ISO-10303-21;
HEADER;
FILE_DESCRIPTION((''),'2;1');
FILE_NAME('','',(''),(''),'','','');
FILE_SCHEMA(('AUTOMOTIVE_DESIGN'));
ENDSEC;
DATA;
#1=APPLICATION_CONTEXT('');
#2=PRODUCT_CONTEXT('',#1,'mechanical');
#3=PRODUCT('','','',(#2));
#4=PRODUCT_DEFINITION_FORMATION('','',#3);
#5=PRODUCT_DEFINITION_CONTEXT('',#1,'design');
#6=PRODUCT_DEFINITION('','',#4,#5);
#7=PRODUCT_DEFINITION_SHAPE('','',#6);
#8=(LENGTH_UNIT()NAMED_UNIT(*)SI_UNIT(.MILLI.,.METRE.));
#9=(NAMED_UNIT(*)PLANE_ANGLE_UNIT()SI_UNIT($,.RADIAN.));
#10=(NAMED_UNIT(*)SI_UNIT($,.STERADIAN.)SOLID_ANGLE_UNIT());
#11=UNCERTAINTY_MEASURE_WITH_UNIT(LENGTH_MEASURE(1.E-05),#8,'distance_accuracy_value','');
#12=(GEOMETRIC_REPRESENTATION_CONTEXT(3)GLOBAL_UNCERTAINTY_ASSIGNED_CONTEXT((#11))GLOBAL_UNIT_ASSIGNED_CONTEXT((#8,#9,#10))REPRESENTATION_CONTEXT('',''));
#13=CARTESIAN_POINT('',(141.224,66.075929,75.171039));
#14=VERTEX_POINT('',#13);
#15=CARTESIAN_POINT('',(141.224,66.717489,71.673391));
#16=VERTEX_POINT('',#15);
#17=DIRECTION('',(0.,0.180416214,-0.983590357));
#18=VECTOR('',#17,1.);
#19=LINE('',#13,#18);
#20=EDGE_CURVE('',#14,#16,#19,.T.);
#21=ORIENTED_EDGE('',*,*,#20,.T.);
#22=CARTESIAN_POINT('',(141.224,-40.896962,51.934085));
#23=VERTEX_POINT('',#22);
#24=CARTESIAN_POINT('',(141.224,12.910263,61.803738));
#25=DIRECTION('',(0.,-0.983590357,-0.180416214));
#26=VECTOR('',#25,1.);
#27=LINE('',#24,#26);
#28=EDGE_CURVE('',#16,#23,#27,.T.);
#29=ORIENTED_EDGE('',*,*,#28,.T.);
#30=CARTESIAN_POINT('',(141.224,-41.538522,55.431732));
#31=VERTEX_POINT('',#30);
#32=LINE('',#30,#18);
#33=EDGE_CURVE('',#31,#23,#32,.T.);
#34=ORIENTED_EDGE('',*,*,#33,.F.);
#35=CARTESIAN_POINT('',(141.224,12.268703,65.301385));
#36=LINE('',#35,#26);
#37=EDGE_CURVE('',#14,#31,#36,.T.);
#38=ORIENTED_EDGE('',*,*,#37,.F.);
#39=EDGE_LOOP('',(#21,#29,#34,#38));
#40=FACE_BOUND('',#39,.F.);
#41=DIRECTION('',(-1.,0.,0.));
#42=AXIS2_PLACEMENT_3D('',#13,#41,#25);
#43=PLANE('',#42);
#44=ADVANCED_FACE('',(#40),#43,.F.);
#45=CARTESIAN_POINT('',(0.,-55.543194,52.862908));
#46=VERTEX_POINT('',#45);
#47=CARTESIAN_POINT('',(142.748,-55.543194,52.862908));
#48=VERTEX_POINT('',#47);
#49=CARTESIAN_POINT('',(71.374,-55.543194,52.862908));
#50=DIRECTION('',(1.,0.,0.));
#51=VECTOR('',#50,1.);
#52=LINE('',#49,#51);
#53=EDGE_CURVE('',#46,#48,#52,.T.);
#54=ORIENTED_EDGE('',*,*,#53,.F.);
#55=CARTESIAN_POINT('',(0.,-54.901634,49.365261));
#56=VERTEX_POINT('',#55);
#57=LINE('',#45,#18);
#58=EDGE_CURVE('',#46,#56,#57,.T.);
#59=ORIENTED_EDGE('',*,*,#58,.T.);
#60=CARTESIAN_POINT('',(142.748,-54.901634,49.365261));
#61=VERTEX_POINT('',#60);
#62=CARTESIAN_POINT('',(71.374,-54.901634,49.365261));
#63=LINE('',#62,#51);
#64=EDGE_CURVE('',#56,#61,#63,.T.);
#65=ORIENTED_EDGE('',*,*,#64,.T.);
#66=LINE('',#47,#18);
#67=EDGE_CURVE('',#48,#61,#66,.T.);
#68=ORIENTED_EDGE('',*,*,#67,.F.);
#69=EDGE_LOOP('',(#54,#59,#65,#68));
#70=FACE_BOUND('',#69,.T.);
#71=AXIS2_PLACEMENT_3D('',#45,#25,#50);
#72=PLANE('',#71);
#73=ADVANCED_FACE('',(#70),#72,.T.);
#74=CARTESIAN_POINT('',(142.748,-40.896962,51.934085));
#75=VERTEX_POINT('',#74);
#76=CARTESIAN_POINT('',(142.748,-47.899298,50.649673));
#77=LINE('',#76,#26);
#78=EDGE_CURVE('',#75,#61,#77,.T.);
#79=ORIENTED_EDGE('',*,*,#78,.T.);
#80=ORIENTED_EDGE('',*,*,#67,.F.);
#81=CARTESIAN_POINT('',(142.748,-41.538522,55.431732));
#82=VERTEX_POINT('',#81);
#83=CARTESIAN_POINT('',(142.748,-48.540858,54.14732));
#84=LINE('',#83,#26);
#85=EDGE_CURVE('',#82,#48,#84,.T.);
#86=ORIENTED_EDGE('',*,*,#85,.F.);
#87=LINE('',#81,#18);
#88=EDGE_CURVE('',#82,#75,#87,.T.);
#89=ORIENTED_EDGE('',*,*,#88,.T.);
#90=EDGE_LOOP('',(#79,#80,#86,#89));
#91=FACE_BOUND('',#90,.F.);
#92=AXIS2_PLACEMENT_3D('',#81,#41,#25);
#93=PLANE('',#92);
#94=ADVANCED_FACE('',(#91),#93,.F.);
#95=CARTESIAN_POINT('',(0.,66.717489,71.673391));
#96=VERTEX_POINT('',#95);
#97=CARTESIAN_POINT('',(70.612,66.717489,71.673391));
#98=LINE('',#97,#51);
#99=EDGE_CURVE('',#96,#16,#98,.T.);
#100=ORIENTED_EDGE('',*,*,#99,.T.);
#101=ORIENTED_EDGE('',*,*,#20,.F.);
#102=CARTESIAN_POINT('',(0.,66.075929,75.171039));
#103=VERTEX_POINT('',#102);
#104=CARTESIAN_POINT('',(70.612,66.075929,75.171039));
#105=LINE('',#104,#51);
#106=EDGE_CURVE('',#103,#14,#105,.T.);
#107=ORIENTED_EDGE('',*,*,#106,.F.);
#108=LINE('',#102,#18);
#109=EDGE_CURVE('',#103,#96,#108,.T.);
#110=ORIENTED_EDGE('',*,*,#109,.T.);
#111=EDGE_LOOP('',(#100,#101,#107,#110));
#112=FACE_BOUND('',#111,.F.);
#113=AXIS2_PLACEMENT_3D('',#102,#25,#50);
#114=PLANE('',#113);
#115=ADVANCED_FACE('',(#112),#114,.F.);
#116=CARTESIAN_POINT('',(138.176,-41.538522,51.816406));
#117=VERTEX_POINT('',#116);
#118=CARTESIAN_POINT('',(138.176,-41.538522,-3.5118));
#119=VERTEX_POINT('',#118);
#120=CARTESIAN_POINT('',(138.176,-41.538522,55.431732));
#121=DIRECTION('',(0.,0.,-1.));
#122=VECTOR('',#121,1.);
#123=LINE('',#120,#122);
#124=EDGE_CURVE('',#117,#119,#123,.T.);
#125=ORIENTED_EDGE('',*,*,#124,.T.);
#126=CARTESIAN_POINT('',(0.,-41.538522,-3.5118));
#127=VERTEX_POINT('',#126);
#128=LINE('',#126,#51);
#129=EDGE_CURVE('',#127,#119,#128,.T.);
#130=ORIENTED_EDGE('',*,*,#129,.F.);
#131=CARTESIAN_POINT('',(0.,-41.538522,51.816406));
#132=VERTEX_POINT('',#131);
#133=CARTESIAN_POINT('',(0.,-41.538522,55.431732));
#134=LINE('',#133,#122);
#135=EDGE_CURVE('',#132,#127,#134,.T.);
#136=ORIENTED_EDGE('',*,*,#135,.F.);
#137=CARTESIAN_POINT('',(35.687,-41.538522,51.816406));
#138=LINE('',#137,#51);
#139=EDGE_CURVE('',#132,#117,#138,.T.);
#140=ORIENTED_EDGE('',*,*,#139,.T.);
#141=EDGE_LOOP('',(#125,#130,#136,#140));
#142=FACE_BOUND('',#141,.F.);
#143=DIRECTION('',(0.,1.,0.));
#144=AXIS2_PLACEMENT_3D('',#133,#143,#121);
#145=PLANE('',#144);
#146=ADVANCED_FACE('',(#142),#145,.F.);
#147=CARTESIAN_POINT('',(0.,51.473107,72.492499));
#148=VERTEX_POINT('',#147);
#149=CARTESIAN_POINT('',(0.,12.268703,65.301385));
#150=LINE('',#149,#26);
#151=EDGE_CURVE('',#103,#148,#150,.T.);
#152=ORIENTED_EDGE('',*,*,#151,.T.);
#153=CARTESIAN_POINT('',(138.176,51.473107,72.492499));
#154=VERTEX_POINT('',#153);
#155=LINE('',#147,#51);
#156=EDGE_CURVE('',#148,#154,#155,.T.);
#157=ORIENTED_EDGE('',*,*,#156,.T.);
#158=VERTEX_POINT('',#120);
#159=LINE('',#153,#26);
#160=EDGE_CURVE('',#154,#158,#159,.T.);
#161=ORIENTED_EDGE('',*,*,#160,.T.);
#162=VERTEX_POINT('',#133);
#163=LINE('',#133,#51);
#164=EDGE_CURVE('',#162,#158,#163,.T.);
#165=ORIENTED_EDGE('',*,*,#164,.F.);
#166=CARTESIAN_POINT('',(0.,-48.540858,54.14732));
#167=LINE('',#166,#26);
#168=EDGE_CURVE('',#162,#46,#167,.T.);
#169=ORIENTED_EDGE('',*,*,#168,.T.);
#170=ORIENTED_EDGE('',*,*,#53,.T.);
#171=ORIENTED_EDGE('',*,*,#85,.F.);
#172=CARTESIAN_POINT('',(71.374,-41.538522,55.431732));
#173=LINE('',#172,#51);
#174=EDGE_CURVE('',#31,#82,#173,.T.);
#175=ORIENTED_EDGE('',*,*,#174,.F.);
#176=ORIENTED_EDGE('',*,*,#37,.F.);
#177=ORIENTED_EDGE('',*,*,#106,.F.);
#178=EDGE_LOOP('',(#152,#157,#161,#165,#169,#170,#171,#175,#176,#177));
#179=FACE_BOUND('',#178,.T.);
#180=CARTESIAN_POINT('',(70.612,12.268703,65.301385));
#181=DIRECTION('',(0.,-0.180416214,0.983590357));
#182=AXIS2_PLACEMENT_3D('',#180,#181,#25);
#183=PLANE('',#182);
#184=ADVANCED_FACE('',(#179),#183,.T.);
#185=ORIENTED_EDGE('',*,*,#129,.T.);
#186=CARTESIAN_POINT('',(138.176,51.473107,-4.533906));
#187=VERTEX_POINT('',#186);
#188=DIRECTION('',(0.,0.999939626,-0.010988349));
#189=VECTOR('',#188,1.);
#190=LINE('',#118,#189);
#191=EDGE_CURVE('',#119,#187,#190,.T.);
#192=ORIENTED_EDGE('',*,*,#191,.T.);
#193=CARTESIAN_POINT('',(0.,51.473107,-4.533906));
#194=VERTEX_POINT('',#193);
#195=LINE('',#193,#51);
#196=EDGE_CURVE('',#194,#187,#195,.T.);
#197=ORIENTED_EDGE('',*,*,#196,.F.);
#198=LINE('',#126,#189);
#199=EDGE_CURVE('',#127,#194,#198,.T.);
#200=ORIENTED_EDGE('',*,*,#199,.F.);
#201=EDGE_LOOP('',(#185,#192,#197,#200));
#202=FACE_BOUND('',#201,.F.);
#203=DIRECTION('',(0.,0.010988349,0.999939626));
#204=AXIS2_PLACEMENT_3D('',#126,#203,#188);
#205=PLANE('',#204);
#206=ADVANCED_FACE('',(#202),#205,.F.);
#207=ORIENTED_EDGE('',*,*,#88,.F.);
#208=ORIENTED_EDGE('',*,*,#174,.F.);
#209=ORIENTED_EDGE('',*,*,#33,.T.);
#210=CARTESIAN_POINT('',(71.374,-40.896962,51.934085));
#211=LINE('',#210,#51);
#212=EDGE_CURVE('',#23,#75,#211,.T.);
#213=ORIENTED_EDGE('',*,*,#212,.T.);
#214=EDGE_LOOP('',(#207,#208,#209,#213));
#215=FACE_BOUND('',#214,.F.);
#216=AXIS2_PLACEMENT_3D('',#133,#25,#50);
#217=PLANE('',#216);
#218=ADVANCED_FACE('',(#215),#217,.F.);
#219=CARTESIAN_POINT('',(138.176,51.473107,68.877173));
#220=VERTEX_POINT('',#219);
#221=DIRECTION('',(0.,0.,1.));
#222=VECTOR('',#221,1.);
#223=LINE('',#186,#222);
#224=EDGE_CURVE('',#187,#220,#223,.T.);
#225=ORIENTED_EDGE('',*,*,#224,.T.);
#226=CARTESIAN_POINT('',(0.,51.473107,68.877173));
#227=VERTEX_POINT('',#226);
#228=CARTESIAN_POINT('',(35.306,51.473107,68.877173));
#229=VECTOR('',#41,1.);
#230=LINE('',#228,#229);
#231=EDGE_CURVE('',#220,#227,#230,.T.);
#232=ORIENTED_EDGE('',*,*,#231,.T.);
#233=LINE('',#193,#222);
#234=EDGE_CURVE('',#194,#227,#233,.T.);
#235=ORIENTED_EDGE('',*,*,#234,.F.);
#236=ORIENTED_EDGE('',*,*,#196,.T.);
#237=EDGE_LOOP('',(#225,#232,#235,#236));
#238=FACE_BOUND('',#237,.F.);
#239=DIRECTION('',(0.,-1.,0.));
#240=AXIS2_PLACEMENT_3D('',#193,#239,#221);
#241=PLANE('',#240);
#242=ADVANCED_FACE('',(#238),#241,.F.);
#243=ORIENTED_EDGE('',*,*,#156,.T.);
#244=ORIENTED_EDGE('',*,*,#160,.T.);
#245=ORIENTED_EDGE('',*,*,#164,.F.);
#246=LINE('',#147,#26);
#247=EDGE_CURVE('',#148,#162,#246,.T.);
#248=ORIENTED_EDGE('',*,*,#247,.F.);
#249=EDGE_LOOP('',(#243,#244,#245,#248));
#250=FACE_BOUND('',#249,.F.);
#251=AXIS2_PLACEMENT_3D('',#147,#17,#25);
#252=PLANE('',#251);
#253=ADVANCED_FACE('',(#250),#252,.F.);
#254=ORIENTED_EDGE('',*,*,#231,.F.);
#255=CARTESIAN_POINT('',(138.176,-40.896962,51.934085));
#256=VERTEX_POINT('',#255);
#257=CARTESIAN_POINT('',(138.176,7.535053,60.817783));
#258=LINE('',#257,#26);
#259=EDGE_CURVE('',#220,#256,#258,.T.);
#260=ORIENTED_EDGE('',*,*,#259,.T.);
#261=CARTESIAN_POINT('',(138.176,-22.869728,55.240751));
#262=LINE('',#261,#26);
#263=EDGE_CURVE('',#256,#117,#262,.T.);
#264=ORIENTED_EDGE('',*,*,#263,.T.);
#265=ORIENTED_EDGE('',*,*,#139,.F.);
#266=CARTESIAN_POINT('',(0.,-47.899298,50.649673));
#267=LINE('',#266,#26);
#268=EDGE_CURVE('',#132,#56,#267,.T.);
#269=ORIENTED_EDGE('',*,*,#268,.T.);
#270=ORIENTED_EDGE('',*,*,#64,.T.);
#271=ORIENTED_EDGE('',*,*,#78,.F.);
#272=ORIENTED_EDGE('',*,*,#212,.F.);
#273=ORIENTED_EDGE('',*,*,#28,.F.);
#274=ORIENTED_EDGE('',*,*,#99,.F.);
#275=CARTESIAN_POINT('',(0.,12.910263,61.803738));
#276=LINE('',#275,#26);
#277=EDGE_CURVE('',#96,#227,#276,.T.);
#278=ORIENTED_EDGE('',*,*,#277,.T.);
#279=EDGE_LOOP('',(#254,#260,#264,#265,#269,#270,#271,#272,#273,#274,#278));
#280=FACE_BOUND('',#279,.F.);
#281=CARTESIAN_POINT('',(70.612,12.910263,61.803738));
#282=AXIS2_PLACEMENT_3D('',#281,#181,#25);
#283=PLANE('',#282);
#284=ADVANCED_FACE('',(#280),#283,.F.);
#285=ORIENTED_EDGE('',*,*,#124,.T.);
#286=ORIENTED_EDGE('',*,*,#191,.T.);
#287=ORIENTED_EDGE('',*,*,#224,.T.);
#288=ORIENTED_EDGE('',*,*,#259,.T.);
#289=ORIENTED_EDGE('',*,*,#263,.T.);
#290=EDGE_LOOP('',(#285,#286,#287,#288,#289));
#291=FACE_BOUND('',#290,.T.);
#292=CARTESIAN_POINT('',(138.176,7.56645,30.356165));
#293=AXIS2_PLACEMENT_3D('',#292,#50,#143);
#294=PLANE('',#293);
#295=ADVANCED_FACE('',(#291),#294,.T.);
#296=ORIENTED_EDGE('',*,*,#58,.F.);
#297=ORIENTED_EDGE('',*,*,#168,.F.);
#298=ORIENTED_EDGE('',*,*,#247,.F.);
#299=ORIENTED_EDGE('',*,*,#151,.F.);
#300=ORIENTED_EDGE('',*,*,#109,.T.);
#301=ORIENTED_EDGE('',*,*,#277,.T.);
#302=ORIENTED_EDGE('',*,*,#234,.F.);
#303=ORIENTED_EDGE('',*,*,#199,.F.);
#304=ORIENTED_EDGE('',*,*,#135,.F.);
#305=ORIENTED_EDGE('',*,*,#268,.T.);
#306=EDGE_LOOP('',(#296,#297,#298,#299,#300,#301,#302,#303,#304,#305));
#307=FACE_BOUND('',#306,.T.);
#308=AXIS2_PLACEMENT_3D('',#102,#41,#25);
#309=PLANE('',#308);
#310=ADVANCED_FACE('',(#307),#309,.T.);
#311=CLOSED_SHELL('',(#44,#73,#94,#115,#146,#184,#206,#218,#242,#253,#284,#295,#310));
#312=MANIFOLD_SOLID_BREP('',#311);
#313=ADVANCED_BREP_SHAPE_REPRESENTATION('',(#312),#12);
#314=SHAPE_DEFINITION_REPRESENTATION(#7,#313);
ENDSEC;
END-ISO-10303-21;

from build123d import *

# Parameters (mm, degrees)
F1_DEPTH = 138.176
F2_E3_W  = 14.2383185016
F2_E3_H  = 142.748
F3_DEPTH = 3.556
F4_E2_W  = 109.4098263908
F4_E2_H  = 141.224
F5_DEPTH = 3.556


with BuildPart() as f1:
    # F0 (on Right) → F1 (new body)
    with BuildSketch(Plane.YZ):
        Polygon((51.4731071889, 72.4924988879), (-41.5385216475, 55.4317318249), (-41.5385216475, -3.5118000333), (51.4731071889, -4.5339060016), align=None)
    extrude(amount=F1_DEPTH)

    # F2_E3 (on explicit) → F3 (join)
    with BuildSketch(Plane(origin=(0, -41.5385216475, 55.4317318249), x_dir=(0, -0.9835903566, -0.1804162143), z_dir=(0, -0.1804162143, 0.9835903566))):
        with Locations((7.1191592508, 71.374)):
            Rectangle(F2_E3_W, F2_E3_H)
    extrude(amount=-F3_DEPTH)

    # F4_E2 (on explicit) → F5 (join)
    with BuildSketch(Plane(origin=(0, 66.0759285092, 75.1710385084), x_dir=(0, -0.9835903566, -0.1804162143), z_dir=(0, -0.1804162143, 0.9835903566))):
        with Locations((54.7049131954, 70.612)):
            Rectangle(F4_E2_W, F4_E2_H)
    extrude(amount=-F5_DEPTH)


solid = f1.part
